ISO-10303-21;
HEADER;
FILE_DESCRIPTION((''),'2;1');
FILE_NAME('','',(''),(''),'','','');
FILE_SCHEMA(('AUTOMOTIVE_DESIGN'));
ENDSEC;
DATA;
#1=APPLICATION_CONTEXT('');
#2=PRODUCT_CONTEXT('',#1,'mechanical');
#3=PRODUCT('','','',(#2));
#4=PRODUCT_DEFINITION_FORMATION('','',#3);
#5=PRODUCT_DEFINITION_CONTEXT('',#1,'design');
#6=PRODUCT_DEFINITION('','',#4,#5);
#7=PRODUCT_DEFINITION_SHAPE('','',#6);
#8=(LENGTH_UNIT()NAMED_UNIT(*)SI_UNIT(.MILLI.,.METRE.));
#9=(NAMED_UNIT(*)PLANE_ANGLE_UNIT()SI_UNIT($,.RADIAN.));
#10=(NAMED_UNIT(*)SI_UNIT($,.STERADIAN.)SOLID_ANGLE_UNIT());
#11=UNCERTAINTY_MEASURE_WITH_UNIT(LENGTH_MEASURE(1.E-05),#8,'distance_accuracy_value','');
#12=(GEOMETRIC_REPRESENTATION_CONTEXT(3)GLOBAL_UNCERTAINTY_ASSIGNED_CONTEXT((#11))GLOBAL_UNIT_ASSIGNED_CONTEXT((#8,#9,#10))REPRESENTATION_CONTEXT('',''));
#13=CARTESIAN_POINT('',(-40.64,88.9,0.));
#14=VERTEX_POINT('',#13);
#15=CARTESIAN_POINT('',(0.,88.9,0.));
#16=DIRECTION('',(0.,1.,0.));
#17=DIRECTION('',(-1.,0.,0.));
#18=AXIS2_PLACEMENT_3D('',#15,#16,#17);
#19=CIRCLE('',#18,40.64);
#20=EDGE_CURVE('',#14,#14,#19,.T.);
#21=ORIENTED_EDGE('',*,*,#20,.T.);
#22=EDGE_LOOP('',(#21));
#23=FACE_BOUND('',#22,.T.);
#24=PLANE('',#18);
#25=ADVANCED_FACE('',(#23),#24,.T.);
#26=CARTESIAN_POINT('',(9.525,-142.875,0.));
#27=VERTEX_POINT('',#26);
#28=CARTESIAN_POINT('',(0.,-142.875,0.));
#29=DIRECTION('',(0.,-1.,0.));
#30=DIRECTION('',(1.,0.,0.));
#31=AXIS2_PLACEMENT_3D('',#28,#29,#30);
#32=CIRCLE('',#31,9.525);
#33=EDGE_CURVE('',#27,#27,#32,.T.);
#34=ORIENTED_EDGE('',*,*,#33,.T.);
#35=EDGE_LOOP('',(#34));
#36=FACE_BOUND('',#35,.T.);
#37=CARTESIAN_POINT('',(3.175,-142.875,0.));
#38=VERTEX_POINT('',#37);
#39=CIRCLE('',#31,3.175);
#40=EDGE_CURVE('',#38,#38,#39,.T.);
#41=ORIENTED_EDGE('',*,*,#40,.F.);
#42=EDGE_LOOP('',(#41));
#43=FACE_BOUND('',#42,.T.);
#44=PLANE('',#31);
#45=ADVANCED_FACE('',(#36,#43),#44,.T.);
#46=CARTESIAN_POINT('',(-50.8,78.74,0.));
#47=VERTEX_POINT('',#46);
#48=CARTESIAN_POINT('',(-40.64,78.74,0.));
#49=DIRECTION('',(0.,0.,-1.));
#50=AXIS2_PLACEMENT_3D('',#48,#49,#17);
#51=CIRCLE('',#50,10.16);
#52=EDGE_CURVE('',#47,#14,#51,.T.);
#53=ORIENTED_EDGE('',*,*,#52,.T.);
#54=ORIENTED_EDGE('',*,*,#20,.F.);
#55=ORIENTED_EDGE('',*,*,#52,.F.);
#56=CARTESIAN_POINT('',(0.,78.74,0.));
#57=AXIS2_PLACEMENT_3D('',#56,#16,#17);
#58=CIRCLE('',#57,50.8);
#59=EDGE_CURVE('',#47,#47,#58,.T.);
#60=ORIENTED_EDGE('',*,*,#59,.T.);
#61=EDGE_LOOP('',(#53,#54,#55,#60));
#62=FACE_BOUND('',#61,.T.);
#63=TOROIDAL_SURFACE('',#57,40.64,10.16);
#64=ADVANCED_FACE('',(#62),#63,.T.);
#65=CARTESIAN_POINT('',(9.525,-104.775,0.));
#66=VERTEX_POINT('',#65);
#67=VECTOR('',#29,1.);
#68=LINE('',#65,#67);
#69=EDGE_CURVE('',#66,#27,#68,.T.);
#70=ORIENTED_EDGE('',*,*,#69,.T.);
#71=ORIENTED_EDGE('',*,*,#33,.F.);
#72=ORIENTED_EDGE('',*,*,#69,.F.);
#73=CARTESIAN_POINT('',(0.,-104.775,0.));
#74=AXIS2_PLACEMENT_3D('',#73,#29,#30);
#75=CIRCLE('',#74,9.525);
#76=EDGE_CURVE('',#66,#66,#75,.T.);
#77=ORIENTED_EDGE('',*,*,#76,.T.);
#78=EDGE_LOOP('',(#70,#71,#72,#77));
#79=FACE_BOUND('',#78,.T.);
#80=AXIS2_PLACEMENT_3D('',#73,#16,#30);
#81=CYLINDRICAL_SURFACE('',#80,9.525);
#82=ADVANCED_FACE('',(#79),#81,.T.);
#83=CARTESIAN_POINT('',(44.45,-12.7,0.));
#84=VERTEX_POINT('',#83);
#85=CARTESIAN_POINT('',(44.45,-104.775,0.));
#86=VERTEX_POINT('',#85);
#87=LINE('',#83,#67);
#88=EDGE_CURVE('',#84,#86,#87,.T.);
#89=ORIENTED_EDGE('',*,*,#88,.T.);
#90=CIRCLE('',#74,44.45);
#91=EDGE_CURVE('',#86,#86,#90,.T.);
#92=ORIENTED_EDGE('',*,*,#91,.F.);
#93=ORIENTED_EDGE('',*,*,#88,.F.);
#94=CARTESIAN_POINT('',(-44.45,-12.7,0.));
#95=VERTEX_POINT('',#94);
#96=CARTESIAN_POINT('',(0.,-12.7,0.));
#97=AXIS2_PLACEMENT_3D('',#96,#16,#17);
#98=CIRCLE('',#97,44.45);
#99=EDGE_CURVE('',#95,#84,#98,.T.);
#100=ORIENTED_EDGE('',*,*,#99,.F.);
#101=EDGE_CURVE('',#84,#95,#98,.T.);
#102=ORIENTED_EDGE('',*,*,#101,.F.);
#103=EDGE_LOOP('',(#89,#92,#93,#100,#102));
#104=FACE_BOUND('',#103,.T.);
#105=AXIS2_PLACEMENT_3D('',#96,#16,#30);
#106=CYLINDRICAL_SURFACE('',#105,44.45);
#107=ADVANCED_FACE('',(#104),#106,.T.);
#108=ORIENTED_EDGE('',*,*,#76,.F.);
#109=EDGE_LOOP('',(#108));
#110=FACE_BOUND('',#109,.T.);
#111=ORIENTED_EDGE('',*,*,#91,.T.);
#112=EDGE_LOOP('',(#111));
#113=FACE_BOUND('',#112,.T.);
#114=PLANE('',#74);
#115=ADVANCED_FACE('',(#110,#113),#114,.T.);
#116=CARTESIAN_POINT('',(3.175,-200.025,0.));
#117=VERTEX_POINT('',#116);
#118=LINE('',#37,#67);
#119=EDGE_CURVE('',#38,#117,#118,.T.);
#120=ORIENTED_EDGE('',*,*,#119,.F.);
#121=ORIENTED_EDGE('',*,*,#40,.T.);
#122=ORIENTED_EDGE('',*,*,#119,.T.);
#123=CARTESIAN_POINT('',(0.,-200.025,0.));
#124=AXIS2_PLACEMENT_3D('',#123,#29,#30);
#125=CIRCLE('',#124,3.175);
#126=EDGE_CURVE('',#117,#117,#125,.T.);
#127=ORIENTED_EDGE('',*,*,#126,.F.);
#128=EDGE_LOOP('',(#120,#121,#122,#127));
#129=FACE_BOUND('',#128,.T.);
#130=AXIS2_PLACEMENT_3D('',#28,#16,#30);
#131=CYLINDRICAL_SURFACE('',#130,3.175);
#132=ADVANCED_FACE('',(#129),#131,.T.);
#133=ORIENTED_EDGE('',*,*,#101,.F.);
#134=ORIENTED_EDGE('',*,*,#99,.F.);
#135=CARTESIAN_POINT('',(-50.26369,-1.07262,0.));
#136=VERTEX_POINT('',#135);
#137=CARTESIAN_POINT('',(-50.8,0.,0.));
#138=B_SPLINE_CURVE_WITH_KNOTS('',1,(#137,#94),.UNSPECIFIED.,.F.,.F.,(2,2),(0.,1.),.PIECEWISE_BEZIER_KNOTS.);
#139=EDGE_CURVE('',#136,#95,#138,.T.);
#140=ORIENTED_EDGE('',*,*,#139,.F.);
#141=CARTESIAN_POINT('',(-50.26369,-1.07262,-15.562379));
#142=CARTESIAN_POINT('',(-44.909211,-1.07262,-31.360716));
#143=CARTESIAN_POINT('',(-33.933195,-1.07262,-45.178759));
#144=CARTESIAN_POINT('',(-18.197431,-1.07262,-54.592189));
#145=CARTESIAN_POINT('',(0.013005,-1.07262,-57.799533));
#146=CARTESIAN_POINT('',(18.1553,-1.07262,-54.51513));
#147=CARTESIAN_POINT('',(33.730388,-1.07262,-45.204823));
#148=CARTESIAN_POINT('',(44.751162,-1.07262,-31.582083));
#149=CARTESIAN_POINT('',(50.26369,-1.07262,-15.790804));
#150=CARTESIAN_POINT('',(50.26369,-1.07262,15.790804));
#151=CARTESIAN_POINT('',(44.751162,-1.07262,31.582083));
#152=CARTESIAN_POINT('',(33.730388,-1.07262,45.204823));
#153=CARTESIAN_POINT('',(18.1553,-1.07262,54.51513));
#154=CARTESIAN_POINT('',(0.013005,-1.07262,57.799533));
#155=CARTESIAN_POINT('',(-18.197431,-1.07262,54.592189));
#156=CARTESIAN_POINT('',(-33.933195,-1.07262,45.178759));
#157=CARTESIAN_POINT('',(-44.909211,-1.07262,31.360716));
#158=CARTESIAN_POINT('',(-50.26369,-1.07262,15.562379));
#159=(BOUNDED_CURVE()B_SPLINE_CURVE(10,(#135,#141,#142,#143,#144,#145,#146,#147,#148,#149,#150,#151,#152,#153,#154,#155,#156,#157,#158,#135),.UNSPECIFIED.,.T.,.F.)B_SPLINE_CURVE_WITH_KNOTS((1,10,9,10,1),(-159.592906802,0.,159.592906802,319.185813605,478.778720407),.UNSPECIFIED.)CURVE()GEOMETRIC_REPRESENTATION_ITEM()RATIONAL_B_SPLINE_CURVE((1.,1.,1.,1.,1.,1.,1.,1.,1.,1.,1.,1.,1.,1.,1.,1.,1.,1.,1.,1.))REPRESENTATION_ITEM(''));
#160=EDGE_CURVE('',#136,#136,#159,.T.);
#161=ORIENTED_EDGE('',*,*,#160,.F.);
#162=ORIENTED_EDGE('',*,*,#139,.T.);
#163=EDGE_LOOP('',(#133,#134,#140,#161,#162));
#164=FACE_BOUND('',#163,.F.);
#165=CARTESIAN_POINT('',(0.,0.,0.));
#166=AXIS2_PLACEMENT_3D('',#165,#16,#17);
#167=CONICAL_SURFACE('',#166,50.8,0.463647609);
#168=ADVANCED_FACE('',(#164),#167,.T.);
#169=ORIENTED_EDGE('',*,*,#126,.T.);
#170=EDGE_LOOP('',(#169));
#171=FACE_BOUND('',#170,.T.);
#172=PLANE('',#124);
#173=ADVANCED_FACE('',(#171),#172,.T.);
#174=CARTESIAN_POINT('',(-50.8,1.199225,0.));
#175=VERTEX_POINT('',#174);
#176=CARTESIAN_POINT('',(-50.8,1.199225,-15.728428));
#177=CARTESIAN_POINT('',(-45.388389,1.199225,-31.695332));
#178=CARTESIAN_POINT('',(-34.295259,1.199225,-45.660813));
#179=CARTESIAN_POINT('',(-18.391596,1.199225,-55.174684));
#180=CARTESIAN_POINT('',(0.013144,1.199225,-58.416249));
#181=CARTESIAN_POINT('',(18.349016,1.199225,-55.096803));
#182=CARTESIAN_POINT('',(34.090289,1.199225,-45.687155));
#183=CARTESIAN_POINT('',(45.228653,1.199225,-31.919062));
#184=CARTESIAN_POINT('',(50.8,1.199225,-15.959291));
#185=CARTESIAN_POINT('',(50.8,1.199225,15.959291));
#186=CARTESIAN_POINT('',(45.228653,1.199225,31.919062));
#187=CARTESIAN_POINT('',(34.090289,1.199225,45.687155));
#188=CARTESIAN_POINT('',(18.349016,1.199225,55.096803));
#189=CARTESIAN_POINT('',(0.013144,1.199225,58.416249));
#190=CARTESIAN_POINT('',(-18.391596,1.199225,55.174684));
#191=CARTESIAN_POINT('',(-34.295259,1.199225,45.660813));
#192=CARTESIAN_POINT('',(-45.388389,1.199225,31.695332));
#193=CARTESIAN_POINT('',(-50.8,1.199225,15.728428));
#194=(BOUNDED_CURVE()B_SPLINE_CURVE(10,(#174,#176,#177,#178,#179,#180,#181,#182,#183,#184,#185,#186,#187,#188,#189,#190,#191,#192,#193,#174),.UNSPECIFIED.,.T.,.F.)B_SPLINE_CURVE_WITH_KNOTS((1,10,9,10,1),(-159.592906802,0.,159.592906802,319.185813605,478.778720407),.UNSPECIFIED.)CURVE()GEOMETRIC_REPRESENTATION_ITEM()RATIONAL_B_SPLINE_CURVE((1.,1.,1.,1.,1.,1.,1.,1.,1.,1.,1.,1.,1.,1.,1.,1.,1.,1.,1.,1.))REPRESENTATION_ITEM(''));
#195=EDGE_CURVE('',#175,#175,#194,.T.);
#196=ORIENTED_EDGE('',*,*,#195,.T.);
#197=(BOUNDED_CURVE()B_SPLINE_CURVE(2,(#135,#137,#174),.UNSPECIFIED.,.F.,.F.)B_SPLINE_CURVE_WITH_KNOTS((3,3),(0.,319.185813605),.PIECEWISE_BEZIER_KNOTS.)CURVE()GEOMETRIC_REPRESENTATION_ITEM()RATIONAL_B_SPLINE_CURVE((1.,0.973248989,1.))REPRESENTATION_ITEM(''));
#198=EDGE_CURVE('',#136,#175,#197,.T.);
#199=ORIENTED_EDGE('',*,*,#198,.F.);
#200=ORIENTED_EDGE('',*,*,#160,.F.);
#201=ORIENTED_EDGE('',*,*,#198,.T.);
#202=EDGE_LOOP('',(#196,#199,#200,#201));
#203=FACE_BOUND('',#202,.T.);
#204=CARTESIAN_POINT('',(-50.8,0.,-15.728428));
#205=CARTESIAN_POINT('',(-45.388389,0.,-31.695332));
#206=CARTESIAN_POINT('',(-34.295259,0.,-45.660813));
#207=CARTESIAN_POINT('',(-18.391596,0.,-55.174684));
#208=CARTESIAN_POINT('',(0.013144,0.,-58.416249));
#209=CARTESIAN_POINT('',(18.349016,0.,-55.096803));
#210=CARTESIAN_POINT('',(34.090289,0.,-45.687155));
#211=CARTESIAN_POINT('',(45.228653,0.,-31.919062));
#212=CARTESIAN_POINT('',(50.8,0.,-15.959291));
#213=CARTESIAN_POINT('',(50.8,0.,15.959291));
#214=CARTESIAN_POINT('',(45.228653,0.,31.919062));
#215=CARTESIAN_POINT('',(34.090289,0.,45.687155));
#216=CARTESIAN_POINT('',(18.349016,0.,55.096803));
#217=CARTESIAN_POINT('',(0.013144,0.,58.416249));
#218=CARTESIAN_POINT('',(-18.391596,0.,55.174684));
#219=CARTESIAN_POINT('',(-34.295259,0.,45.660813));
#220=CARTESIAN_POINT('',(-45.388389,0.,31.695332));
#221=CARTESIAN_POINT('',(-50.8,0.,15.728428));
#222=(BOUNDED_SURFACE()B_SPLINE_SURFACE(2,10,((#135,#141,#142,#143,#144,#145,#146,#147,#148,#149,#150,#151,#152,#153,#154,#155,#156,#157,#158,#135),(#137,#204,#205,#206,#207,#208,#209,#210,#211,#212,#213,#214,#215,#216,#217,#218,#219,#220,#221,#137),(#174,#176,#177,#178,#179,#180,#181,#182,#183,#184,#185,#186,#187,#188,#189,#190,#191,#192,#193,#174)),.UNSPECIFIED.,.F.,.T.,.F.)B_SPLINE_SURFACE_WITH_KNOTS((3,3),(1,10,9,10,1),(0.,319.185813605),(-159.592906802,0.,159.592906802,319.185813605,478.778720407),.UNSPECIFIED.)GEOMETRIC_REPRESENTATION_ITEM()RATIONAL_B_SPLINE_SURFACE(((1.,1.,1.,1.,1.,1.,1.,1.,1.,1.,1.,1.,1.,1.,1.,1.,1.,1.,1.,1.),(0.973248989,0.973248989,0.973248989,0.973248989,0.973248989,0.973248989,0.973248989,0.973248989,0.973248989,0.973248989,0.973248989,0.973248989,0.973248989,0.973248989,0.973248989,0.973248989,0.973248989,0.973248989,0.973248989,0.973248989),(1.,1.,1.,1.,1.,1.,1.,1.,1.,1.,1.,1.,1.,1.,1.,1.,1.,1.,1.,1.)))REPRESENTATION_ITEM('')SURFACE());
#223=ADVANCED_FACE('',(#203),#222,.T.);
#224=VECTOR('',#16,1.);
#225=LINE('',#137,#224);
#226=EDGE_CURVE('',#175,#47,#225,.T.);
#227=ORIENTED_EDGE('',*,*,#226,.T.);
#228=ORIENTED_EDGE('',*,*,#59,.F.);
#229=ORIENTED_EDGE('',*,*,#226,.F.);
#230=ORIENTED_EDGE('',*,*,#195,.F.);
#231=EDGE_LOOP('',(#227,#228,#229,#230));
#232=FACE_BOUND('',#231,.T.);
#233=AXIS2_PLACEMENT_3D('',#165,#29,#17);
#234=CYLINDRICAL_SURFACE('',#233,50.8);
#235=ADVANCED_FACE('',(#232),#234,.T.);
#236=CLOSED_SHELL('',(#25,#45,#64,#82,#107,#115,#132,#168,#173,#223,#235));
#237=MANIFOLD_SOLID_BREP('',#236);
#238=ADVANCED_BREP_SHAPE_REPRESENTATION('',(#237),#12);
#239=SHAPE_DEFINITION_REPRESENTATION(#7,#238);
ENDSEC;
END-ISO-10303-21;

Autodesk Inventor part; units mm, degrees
ref_plane "YZ Plane" through (0, 0, 0) normal (1, 0, 0) x (0, 1, 0)
ref_plane "XZ Plane" through (0, 0, 0) normal (0, 1, 0) x (-1, 0, 0)
ref_plane "XY Plane" through (0, 0, 0) normal (0, 0, 1) x (1, 0, 0)
sketch "Sketch1" plane through (0, 0, 0) normal (0, 1, 0) x (-1, 0, 0)
  circle A0 centre (0, 0) radius 50.8
  dimension "d0" = 101.6
extrude "Extrusion1" add sketch "Sketch1" along normal blind 88.9
fillet "Fillet1" radius 10.16 1 edges at (50.8, 88.9, 0)
sketch "Sketch2" plane through (0, 0, 0) normal (0, -1, 0) x (1, 0, 0)
  circle A0 centre (0, 0) radius 50.8 projected
  circle A1 centre (0, 0) radius 44.45
  dimension "d4" = 88.9
extrude "Extrusion2" add sketch "Sketch2" along normal blind 12.7 contours A1
loft "Loft1" add section 1 edges at (50.8, 0, 0) section 2 edges at (-44.45, -12.7, 0)
fillet "Fillet2" radius 5.08 1 edges at (50.8, 0, 0)
sketch "Sketch3" plane through (0, -12.7, 0) normal (0, -1, 0) x (1, 0, 0)
  circle A0 centre (0, 0) radius 44.45 projected
extrude "Extrusion3" add sketch "Sketch3" along normal blind 92.075
sketch "Sketch4" plane through (0, -104.775, 0) normal (0, -1, 0) x (1, 0, 0)
  circle A0 centre (0, 0) radius 44.45 projected
  circle A1 centre (0, 0) radius 9.525
  dimension "d14" = 19.05
extrude "Extrusion4" add sketch "Sketch4" along normal blind 38.1 contours A1
sketch "Sketch5" plane through (0, -142.875, 0) normal (0, -1, 0) x (1, 0, 0)
  circle A0 centre (0, 0) radius 9.525 projected
  circle A1 centre (0, 0) radius 3.175
  dimension "d17" = 6.35
extrude "Extrusion5" add sketch "Sketch5" along normal blind 57.15 contours A1
properties part number "1617evs"
